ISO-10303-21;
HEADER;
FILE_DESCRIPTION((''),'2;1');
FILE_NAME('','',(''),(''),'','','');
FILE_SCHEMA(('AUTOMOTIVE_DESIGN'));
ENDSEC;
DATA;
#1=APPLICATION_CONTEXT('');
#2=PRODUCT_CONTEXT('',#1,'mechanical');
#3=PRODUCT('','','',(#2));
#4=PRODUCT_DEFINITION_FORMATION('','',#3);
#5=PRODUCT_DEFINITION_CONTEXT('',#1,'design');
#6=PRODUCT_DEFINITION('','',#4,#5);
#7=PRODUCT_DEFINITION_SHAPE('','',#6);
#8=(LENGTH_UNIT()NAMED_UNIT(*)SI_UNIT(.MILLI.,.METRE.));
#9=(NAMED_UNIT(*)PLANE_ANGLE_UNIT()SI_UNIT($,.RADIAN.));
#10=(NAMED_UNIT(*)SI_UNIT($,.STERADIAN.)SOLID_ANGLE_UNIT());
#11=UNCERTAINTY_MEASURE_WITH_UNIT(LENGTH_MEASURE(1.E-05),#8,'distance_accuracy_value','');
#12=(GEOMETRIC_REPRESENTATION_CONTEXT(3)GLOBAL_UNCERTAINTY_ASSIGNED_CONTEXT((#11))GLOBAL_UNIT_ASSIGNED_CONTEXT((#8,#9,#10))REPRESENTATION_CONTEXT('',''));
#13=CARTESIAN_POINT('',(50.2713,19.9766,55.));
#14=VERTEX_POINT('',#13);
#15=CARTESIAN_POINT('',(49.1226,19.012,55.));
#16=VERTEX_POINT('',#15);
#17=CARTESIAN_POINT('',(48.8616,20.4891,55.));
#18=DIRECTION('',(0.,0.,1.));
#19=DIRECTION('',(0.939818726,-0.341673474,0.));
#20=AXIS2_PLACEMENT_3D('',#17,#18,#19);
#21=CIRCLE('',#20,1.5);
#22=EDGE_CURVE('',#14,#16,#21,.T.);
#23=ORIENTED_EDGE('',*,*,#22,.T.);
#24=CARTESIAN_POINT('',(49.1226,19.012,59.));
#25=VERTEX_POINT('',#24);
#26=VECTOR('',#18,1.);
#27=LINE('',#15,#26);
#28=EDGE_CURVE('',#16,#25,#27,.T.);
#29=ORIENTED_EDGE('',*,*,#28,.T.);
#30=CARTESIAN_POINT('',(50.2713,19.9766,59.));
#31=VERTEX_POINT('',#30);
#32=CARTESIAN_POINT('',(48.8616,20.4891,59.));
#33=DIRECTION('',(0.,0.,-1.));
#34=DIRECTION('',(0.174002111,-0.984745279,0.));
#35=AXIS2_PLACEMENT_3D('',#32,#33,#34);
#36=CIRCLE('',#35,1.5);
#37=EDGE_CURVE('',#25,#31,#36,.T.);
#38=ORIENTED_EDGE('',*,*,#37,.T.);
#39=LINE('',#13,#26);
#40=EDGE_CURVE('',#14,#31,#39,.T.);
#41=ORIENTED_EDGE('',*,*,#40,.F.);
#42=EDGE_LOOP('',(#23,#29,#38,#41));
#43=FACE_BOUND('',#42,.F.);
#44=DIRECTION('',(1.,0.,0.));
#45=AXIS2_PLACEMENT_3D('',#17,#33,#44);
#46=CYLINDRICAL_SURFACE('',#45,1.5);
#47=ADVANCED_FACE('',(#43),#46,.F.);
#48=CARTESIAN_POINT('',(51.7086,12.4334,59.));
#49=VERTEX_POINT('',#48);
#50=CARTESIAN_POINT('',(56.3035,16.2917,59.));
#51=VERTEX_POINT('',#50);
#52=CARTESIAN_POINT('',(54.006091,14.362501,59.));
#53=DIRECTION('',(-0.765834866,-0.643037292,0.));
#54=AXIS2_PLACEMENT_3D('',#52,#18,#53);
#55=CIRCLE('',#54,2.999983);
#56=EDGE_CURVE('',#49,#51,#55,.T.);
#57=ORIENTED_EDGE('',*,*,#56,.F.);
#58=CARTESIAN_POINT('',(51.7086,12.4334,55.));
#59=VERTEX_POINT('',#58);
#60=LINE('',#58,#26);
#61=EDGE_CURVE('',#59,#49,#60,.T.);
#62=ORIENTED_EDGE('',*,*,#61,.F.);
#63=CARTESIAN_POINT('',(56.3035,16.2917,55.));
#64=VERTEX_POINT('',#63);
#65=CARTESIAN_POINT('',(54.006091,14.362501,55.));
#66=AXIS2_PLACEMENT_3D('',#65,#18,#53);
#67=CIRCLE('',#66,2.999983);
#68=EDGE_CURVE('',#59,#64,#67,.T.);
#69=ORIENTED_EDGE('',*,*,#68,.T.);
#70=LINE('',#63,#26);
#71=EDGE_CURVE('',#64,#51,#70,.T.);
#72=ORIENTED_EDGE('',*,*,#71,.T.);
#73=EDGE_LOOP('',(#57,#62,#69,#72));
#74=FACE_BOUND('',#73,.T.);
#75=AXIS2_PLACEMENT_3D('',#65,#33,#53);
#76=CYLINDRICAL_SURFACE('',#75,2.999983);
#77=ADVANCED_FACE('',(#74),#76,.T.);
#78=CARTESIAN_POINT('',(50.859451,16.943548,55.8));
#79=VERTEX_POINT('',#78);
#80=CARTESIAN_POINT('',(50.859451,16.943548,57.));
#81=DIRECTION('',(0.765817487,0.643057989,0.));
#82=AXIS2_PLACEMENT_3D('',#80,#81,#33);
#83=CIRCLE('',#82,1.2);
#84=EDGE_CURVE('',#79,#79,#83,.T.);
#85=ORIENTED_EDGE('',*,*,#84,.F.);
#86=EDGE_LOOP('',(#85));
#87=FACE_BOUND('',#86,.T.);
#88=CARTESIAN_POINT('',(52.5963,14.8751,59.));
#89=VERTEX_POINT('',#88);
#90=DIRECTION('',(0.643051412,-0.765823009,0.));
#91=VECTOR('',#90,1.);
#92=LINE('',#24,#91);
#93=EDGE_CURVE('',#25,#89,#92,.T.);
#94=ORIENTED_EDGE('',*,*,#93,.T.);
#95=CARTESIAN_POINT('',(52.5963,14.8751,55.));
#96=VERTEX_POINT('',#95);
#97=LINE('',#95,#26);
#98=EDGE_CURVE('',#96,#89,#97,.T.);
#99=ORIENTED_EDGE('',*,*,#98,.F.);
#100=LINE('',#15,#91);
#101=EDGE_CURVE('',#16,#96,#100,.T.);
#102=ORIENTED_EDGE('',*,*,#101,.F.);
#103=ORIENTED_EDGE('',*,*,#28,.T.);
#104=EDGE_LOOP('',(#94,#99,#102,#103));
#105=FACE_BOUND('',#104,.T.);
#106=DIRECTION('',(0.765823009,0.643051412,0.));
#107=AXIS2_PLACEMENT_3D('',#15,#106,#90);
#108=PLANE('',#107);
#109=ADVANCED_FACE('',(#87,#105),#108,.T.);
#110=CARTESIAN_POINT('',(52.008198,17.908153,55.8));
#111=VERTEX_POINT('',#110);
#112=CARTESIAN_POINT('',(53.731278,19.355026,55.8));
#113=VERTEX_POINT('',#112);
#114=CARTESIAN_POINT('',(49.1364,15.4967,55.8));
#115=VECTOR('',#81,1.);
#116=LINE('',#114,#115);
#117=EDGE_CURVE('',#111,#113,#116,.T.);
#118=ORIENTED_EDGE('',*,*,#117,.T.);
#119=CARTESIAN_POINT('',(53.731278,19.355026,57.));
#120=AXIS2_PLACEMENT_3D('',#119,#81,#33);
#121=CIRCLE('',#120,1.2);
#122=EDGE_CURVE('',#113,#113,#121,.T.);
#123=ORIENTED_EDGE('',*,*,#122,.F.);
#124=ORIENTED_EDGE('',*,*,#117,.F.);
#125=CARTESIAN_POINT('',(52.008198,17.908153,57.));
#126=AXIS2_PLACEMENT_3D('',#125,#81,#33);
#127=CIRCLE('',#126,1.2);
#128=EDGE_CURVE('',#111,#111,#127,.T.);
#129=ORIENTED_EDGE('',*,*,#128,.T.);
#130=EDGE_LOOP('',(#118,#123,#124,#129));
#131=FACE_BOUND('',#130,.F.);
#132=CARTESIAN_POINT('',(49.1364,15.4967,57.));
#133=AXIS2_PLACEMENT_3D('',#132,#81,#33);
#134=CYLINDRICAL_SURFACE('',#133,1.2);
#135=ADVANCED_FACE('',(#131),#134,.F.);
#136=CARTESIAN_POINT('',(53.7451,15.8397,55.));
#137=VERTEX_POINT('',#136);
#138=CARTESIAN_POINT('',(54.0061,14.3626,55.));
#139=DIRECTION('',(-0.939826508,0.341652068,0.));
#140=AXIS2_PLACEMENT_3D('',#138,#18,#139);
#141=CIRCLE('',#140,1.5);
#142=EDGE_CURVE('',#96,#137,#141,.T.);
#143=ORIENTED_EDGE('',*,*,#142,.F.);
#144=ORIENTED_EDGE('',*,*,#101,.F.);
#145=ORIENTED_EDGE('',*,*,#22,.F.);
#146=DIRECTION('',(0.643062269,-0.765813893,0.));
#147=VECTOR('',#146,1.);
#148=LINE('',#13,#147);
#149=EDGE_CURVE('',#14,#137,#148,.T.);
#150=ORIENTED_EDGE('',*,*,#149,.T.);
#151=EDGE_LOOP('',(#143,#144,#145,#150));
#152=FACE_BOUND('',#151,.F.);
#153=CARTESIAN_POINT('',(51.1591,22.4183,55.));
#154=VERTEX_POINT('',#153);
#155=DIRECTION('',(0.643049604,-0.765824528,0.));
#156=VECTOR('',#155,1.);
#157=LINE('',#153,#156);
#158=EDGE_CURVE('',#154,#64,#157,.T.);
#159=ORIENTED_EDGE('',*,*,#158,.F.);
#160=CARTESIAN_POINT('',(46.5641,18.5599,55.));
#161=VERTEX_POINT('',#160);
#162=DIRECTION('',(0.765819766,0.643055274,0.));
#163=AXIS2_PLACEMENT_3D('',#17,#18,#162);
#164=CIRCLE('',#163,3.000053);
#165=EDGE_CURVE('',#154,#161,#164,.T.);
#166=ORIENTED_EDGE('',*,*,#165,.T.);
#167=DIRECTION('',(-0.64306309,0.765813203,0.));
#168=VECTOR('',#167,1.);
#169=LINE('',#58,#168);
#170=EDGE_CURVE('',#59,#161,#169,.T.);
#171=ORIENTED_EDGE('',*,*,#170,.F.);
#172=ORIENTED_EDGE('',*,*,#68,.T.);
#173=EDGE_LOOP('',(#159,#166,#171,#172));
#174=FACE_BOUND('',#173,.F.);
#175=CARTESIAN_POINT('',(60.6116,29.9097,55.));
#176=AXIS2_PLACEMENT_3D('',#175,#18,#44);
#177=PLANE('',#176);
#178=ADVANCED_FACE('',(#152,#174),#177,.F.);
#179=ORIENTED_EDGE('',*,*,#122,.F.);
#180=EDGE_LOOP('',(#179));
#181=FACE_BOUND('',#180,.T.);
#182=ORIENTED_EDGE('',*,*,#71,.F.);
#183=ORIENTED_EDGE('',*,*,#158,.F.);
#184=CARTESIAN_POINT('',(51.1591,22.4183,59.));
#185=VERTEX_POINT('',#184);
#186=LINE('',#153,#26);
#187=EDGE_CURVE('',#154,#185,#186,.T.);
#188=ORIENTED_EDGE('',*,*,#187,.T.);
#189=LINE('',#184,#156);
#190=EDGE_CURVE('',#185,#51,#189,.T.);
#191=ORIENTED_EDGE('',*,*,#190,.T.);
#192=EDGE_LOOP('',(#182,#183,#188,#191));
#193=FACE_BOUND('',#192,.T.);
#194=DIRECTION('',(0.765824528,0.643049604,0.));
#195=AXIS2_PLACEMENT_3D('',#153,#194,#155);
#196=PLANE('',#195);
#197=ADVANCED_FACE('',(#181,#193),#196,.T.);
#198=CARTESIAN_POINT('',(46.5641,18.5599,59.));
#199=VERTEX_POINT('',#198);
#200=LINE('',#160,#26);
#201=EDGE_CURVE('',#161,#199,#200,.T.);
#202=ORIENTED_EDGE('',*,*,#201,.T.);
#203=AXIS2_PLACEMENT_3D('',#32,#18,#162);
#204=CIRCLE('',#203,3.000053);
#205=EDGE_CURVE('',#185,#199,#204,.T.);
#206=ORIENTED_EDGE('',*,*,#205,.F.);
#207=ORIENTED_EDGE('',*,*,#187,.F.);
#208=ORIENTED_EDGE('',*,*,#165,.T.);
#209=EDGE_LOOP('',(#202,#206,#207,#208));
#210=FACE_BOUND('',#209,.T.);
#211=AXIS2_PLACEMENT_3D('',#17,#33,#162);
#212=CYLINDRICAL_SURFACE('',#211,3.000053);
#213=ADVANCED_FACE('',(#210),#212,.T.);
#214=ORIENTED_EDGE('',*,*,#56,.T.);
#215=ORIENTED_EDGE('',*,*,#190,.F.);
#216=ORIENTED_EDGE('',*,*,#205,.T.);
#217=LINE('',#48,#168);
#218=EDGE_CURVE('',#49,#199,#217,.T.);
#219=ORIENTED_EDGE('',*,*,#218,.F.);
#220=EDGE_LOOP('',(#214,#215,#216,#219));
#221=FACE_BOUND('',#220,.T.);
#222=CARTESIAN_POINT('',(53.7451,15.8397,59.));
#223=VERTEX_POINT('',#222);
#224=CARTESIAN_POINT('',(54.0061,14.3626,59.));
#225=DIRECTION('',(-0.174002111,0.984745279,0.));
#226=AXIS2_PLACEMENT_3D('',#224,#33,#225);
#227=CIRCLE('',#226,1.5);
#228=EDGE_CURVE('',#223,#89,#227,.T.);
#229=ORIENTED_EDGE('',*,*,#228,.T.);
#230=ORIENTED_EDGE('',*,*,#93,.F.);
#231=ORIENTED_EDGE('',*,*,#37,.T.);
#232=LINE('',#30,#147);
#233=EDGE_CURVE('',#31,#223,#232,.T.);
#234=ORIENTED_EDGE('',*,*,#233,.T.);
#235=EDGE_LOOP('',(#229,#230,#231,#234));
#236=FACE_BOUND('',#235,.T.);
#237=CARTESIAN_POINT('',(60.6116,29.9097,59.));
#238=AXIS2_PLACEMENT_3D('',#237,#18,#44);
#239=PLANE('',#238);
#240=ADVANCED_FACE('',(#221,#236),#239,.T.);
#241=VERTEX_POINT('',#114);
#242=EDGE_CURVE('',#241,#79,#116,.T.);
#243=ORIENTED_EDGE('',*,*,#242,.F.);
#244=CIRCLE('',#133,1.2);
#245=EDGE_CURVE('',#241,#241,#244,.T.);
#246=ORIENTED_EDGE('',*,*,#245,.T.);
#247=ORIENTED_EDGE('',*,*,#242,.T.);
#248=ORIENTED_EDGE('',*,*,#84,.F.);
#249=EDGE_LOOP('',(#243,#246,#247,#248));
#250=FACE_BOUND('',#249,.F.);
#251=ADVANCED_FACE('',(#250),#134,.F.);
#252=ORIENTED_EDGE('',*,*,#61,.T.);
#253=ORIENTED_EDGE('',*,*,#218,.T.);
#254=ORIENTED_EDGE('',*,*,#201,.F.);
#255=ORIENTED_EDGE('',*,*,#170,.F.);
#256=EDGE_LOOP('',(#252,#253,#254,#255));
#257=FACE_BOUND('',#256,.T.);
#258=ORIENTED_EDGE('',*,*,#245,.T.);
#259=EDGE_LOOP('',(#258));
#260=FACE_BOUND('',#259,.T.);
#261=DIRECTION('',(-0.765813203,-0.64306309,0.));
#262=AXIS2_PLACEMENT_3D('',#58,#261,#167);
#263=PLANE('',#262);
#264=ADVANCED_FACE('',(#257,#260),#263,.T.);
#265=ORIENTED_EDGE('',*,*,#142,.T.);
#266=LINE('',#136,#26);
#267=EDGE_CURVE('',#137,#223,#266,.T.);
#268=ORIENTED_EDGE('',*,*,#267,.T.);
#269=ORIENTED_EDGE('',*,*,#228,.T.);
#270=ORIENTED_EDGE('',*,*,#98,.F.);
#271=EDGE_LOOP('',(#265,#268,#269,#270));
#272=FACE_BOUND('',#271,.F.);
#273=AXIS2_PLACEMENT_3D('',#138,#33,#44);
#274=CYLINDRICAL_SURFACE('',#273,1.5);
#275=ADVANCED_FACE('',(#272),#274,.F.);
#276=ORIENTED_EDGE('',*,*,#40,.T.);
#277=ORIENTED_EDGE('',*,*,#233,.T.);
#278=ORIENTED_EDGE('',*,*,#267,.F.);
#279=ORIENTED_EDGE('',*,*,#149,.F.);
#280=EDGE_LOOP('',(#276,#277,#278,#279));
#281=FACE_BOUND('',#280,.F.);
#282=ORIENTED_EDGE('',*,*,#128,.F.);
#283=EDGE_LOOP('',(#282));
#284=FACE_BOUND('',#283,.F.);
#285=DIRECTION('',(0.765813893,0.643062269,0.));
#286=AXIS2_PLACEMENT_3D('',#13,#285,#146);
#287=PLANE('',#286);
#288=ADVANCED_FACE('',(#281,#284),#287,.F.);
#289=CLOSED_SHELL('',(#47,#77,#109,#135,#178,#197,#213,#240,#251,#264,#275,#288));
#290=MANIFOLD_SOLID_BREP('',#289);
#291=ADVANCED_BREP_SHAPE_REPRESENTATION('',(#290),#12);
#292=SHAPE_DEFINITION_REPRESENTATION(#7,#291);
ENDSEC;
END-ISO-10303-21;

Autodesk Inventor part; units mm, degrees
ref_plane "YZ Plane" through (0, 0, 0) normal (1, 0, 0) x (0, 1, 0)
ref_plane "XZ Plane" through (0, 0, 0) normal (0, 1, 0) x (-1, 0, 0)
ref_plane "XY Plane" through (0, 0, 0) normal (0, 0, 1) x (1, 0, 0)
ref_plane "Work Plane1" through (60.6116, 29.9097, 55) normal (0, 0, 1) x (1, 0, 0)
sketch "Sketch1" plane through (60.6116, 29.9097, 55) normal (0, 0, 1) x (1, 0, 0)
  circle A0 centre (-11.75, -9.4206) radius 1.5 projected
  circle A1 centre (-6.6055, -15.5471) radius 1.5 projected
  arc A2 (-9.4525, -7.4914) -> (-14.0475, -11.3498) centre (-11.75, -9.4206) ccw
  arc A3 (-8.903, -17.4763) -> (-4.3081, -13.618) centre (-6.6055, -15.5471) ccw
  line L0 (-9.4525, -7.4914) -> (-4.3081, -13.618)
  line L1 (-8.903, -17.4763) -> (-14.0475, -11.3498)
  line L2 (-11.489, -10.8977) -> (-8.0153, -15.0346)
  line L3 (-10.3403, -9.9331) -> (-6.8665, -14.07)
  line L4 (-11.75, -9.4206) -> (-6.6055, -15.5471) construction
  point P0 (-60.6116, -29.9097)
  dimension "d0" = 6
  dimension "d1" = 6
  dimension "d2" = 1.5
extrude "Extrusion1" add sketch "Sketch1" along normal blind 4
sketch "Sketch2" plane through (51.7087, 12.4334, 55) normal (-0.7658175, -0.643058, 0) x (0, 0, 1)
  line L0 (4, 0) -> (4, 8) projected
  line L1 (4, 4) -> (0, 4) construction
  line L2 (0, 6.701) -> (0, 1.299) projected
  line L3 (0, 0) -> (4, 0) projected
  line L4 (2, 0) -> (2, 8) construction
  line L5 (0, 8) -> (4, 8) projected
  point P0 (-55, 23.7299)
  point P1 (2, 4)
hole "Hole1" at (49.1364, 15.4967, 57) direction (0.7658175, 0.643058, 0) diameter 2.4 end through all clearance for "Countersunk Head GOST 12876-67" size "M2" standard "GOST"
properties part number "rail_holder"
